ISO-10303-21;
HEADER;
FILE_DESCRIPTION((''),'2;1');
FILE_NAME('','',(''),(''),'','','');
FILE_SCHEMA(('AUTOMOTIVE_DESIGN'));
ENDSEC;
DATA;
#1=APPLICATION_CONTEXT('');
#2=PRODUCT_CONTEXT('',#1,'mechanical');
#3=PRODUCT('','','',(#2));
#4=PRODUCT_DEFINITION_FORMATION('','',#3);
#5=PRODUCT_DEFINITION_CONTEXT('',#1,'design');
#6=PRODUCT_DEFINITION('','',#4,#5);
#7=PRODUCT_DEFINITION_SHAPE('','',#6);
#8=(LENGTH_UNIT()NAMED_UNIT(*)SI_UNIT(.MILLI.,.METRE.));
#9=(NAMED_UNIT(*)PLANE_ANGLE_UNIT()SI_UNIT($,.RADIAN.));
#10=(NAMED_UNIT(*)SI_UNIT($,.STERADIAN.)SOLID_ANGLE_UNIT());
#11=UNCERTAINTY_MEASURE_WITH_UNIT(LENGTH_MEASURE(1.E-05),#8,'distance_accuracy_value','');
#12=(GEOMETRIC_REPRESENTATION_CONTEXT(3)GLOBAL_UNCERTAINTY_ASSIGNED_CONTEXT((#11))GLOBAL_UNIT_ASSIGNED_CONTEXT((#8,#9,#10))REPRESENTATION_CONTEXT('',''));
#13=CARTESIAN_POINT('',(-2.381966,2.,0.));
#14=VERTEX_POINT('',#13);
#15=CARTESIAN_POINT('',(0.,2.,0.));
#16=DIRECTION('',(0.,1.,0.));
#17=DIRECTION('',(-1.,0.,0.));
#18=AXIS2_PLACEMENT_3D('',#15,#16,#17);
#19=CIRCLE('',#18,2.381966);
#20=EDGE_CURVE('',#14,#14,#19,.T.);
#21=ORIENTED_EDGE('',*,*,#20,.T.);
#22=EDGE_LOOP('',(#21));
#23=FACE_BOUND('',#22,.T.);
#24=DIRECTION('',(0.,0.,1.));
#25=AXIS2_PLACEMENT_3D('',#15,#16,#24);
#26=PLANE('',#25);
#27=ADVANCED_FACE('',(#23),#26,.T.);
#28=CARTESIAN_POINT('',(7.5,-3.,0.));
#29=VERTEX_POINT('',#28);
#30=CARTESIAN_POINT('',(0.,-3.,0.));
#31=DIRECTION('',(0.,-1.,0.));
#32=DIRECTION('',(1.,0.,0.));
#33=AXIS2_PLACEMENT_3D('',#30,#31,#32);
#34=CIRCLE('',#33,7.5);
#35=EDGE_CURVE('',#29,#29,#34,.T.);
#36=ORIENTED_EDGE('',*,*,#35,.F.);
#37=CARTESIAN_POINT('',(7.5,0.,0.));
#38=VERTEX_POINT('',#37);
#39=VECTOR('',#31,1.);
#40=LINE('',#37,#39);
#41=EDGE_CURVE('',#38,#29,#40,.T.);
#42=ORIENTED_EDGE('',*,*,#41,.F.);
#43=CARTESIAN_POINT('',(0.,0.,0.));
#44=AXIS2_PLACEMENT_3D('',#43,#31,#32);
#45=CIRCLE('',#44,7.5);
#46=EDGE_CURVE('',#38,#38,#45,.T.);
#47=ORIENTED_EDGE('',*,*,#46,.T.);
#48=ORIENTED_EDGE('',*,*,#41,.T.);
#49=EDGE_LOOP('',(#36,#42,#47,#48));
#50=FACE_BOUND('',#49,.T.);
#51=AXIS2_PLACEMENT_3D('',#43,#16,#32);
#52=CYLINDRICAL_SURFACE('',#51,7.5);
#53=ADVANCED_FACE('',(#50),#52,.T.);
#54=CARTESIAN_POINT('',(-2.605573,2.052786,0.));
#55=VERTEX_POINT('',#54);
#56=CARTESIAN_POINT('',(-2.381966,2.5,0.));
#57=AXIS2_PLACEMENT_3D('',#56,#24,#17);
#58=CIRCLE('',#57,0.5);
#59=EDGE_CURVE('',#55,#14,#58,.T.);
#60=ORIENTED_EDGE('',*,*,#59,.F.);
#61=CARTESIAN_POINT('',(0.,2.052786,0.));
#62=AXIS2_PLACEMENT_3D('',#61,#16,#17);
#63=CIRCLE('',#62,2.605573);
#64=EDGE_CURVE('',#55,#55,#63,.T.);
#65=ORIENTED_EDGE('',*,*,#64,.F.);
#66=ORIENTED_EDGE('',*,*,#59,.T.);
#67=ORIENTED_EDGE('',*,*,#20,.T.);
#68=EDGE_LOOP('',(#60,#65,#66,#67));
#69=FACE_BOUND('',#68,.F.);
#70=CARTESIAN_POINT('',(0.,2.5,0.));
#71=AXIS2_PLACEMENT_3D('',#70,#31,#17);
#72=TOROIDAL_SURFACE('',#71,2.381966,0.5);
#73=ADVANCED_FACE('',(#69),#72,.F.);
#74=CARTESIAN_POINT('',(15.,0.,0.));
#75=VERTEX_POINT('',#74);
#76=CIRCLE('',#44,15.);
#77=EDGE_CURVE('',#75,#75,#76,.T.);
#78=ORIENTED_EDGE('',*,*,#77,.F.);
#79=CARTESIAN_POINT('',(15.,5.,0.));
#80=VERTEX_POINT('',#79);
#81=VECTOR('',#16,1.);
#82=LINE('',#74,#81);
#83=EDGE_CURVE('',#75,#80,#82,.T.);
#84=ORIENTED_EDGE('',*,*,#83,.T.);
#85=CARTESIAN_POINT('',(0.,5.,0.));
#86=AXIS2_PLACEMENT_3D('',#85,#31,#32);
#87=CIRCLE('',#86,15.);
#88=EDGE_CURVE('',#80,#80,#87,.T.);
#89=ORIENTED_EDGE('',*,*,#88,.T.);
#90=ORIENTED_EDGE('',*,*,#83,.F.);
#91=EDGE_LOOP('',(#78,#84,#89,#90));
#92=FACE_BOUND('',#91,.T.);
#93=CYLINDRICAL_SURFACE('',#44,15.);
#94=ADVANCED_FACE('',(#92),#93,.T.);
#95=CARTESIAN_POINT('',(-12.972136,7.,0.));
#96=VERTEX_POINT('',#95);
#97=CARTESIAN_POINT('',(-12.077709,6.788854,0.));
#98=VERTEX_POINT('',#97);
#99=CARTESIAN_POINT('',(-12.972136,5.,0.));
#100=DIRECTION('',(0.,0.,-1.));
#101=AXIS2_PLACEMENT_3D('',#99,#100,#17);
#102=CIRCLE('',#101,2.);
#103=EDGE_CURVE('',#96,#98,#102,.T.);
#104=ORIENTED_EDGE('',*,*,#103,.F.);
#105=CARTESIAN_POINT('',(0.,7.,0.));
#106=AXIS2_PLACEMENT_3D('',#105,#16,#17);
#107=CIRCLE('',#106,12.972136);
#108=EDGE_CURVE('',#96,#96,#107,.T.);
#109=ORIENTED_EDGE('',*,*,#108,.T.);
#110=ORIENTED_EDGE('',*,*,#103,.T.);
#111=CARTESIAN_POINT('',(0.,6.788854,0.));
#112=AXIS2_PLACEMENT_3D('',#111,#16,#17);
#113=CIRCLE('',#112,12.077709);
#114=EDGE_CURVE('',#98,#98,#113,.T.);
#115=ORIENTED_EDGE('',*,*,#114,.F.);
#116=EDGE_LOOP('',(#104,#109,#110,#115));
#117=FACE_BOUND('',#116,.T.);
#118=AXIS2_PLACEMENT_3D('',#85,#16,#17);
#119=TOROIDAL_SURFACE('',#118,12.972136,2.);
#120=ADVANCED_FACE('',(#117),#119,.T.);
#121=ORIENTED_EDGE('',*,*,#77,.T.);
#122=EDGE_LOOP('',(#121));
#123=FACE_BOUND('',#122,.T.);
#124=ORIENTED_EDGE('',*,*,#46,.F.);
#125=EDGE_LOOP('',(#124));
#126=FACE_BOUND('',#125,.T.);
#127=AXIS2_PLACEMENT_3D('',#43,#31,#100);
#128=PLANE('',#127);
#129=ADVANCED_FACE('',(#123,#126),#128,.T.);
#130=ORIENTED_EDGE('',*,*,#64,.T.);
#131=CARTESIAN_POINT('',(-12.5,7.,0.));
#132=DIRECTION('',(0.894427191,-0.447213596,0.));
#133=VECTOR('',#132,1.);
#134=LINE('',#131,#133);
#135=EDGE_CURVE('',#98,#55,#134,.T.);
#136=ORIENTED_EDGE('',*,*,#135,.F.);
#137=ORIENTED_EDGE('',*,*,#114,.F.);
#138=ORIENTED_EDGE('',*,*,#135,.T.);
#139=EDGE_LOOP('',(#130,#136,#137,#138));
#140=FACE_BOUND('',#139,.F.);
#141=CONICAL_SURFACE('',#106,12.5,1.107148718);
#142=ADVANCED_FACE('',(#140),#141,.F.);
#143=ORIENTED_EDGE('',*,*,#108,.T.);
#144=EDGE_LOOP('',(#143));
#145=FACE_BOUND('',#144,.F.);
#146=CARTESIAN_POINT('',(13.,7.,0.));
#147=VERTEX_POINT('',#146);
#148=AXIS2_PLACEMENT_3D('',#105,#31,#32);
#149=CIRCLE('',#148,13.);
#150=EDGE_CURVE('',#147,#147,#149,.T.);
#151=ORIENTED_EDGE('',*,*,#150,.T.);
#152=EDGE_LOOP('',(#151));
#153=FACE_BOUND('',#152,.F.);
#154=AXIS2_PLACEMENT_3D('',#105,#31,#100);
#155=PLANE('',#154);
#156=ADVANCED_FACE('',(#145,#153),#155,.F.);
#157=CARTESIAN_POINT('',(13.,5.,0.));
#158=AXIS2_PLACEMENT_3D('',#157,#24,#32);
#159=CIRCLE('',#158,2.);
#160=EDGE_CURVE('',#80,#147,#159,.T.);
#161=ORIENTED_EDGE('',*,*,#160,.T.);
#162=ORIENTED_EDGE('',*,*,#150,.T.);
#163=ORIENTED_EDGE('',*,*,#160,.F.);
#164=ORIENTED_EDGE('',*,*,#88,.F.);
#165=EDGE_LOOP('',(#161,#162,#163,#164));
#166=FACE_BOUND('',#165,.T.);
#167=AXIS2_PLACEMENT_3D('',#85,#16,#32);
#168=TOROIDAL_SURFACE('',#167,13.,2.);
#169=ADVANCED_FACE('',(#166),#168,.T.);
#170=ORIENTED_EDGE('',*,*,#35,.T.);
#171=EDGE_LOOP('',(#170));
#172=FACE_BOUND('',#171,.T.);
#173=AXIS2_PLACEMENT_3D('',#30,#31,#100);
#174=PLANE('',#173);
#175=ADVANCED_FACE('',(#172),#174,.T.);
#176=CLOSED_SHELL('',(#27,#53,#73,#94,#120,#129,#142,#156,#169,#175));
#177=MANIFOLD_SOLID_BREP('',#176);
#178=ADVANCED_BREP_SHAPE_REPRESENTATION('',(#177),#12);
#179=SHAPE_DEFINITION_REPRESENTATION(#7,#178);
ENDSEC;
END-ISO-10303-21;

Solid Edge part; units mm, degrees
sketch "Sketch1" plane through (0, 0, 0) normal (0, -1, 0) x (1, 0, 0)
  circle A0 centre (0, 0) radius 15
extrude "Protrusion1" add sketch "Sketch1" against normal blind 7
sketch "Sketch2" plane through (0, 7, 0) normal (0, 1, 0) x (-1, 0, 0)
  circle A0 centre (0, 0) radius 12.5
extrude "ExtrudedCutout_3" cut sketch "Sketch2" against normal blind 5
chamfer "Chamfer_9" distance 10 distance2 5 1 edges at (12.5, 2, 0) measured on face at (-8.0833, 2, -8.5833)
sketch "Sketch3" plane through (0, 0, 0) normal (0, -1, 0) x (1, 0, 0)
  circle A0 centre (0, 0) radius 7.5
extrude "ExtrudedProtrusion_3" add sketch "Sketch3" along normal blind 3
fillet "Round_2" radius 2 2 edges at (12.5, 7, 0) (-15, 7, 0)
fillet "Round_3" radius 0.5 1 edges at (0, 2, 2.5)
